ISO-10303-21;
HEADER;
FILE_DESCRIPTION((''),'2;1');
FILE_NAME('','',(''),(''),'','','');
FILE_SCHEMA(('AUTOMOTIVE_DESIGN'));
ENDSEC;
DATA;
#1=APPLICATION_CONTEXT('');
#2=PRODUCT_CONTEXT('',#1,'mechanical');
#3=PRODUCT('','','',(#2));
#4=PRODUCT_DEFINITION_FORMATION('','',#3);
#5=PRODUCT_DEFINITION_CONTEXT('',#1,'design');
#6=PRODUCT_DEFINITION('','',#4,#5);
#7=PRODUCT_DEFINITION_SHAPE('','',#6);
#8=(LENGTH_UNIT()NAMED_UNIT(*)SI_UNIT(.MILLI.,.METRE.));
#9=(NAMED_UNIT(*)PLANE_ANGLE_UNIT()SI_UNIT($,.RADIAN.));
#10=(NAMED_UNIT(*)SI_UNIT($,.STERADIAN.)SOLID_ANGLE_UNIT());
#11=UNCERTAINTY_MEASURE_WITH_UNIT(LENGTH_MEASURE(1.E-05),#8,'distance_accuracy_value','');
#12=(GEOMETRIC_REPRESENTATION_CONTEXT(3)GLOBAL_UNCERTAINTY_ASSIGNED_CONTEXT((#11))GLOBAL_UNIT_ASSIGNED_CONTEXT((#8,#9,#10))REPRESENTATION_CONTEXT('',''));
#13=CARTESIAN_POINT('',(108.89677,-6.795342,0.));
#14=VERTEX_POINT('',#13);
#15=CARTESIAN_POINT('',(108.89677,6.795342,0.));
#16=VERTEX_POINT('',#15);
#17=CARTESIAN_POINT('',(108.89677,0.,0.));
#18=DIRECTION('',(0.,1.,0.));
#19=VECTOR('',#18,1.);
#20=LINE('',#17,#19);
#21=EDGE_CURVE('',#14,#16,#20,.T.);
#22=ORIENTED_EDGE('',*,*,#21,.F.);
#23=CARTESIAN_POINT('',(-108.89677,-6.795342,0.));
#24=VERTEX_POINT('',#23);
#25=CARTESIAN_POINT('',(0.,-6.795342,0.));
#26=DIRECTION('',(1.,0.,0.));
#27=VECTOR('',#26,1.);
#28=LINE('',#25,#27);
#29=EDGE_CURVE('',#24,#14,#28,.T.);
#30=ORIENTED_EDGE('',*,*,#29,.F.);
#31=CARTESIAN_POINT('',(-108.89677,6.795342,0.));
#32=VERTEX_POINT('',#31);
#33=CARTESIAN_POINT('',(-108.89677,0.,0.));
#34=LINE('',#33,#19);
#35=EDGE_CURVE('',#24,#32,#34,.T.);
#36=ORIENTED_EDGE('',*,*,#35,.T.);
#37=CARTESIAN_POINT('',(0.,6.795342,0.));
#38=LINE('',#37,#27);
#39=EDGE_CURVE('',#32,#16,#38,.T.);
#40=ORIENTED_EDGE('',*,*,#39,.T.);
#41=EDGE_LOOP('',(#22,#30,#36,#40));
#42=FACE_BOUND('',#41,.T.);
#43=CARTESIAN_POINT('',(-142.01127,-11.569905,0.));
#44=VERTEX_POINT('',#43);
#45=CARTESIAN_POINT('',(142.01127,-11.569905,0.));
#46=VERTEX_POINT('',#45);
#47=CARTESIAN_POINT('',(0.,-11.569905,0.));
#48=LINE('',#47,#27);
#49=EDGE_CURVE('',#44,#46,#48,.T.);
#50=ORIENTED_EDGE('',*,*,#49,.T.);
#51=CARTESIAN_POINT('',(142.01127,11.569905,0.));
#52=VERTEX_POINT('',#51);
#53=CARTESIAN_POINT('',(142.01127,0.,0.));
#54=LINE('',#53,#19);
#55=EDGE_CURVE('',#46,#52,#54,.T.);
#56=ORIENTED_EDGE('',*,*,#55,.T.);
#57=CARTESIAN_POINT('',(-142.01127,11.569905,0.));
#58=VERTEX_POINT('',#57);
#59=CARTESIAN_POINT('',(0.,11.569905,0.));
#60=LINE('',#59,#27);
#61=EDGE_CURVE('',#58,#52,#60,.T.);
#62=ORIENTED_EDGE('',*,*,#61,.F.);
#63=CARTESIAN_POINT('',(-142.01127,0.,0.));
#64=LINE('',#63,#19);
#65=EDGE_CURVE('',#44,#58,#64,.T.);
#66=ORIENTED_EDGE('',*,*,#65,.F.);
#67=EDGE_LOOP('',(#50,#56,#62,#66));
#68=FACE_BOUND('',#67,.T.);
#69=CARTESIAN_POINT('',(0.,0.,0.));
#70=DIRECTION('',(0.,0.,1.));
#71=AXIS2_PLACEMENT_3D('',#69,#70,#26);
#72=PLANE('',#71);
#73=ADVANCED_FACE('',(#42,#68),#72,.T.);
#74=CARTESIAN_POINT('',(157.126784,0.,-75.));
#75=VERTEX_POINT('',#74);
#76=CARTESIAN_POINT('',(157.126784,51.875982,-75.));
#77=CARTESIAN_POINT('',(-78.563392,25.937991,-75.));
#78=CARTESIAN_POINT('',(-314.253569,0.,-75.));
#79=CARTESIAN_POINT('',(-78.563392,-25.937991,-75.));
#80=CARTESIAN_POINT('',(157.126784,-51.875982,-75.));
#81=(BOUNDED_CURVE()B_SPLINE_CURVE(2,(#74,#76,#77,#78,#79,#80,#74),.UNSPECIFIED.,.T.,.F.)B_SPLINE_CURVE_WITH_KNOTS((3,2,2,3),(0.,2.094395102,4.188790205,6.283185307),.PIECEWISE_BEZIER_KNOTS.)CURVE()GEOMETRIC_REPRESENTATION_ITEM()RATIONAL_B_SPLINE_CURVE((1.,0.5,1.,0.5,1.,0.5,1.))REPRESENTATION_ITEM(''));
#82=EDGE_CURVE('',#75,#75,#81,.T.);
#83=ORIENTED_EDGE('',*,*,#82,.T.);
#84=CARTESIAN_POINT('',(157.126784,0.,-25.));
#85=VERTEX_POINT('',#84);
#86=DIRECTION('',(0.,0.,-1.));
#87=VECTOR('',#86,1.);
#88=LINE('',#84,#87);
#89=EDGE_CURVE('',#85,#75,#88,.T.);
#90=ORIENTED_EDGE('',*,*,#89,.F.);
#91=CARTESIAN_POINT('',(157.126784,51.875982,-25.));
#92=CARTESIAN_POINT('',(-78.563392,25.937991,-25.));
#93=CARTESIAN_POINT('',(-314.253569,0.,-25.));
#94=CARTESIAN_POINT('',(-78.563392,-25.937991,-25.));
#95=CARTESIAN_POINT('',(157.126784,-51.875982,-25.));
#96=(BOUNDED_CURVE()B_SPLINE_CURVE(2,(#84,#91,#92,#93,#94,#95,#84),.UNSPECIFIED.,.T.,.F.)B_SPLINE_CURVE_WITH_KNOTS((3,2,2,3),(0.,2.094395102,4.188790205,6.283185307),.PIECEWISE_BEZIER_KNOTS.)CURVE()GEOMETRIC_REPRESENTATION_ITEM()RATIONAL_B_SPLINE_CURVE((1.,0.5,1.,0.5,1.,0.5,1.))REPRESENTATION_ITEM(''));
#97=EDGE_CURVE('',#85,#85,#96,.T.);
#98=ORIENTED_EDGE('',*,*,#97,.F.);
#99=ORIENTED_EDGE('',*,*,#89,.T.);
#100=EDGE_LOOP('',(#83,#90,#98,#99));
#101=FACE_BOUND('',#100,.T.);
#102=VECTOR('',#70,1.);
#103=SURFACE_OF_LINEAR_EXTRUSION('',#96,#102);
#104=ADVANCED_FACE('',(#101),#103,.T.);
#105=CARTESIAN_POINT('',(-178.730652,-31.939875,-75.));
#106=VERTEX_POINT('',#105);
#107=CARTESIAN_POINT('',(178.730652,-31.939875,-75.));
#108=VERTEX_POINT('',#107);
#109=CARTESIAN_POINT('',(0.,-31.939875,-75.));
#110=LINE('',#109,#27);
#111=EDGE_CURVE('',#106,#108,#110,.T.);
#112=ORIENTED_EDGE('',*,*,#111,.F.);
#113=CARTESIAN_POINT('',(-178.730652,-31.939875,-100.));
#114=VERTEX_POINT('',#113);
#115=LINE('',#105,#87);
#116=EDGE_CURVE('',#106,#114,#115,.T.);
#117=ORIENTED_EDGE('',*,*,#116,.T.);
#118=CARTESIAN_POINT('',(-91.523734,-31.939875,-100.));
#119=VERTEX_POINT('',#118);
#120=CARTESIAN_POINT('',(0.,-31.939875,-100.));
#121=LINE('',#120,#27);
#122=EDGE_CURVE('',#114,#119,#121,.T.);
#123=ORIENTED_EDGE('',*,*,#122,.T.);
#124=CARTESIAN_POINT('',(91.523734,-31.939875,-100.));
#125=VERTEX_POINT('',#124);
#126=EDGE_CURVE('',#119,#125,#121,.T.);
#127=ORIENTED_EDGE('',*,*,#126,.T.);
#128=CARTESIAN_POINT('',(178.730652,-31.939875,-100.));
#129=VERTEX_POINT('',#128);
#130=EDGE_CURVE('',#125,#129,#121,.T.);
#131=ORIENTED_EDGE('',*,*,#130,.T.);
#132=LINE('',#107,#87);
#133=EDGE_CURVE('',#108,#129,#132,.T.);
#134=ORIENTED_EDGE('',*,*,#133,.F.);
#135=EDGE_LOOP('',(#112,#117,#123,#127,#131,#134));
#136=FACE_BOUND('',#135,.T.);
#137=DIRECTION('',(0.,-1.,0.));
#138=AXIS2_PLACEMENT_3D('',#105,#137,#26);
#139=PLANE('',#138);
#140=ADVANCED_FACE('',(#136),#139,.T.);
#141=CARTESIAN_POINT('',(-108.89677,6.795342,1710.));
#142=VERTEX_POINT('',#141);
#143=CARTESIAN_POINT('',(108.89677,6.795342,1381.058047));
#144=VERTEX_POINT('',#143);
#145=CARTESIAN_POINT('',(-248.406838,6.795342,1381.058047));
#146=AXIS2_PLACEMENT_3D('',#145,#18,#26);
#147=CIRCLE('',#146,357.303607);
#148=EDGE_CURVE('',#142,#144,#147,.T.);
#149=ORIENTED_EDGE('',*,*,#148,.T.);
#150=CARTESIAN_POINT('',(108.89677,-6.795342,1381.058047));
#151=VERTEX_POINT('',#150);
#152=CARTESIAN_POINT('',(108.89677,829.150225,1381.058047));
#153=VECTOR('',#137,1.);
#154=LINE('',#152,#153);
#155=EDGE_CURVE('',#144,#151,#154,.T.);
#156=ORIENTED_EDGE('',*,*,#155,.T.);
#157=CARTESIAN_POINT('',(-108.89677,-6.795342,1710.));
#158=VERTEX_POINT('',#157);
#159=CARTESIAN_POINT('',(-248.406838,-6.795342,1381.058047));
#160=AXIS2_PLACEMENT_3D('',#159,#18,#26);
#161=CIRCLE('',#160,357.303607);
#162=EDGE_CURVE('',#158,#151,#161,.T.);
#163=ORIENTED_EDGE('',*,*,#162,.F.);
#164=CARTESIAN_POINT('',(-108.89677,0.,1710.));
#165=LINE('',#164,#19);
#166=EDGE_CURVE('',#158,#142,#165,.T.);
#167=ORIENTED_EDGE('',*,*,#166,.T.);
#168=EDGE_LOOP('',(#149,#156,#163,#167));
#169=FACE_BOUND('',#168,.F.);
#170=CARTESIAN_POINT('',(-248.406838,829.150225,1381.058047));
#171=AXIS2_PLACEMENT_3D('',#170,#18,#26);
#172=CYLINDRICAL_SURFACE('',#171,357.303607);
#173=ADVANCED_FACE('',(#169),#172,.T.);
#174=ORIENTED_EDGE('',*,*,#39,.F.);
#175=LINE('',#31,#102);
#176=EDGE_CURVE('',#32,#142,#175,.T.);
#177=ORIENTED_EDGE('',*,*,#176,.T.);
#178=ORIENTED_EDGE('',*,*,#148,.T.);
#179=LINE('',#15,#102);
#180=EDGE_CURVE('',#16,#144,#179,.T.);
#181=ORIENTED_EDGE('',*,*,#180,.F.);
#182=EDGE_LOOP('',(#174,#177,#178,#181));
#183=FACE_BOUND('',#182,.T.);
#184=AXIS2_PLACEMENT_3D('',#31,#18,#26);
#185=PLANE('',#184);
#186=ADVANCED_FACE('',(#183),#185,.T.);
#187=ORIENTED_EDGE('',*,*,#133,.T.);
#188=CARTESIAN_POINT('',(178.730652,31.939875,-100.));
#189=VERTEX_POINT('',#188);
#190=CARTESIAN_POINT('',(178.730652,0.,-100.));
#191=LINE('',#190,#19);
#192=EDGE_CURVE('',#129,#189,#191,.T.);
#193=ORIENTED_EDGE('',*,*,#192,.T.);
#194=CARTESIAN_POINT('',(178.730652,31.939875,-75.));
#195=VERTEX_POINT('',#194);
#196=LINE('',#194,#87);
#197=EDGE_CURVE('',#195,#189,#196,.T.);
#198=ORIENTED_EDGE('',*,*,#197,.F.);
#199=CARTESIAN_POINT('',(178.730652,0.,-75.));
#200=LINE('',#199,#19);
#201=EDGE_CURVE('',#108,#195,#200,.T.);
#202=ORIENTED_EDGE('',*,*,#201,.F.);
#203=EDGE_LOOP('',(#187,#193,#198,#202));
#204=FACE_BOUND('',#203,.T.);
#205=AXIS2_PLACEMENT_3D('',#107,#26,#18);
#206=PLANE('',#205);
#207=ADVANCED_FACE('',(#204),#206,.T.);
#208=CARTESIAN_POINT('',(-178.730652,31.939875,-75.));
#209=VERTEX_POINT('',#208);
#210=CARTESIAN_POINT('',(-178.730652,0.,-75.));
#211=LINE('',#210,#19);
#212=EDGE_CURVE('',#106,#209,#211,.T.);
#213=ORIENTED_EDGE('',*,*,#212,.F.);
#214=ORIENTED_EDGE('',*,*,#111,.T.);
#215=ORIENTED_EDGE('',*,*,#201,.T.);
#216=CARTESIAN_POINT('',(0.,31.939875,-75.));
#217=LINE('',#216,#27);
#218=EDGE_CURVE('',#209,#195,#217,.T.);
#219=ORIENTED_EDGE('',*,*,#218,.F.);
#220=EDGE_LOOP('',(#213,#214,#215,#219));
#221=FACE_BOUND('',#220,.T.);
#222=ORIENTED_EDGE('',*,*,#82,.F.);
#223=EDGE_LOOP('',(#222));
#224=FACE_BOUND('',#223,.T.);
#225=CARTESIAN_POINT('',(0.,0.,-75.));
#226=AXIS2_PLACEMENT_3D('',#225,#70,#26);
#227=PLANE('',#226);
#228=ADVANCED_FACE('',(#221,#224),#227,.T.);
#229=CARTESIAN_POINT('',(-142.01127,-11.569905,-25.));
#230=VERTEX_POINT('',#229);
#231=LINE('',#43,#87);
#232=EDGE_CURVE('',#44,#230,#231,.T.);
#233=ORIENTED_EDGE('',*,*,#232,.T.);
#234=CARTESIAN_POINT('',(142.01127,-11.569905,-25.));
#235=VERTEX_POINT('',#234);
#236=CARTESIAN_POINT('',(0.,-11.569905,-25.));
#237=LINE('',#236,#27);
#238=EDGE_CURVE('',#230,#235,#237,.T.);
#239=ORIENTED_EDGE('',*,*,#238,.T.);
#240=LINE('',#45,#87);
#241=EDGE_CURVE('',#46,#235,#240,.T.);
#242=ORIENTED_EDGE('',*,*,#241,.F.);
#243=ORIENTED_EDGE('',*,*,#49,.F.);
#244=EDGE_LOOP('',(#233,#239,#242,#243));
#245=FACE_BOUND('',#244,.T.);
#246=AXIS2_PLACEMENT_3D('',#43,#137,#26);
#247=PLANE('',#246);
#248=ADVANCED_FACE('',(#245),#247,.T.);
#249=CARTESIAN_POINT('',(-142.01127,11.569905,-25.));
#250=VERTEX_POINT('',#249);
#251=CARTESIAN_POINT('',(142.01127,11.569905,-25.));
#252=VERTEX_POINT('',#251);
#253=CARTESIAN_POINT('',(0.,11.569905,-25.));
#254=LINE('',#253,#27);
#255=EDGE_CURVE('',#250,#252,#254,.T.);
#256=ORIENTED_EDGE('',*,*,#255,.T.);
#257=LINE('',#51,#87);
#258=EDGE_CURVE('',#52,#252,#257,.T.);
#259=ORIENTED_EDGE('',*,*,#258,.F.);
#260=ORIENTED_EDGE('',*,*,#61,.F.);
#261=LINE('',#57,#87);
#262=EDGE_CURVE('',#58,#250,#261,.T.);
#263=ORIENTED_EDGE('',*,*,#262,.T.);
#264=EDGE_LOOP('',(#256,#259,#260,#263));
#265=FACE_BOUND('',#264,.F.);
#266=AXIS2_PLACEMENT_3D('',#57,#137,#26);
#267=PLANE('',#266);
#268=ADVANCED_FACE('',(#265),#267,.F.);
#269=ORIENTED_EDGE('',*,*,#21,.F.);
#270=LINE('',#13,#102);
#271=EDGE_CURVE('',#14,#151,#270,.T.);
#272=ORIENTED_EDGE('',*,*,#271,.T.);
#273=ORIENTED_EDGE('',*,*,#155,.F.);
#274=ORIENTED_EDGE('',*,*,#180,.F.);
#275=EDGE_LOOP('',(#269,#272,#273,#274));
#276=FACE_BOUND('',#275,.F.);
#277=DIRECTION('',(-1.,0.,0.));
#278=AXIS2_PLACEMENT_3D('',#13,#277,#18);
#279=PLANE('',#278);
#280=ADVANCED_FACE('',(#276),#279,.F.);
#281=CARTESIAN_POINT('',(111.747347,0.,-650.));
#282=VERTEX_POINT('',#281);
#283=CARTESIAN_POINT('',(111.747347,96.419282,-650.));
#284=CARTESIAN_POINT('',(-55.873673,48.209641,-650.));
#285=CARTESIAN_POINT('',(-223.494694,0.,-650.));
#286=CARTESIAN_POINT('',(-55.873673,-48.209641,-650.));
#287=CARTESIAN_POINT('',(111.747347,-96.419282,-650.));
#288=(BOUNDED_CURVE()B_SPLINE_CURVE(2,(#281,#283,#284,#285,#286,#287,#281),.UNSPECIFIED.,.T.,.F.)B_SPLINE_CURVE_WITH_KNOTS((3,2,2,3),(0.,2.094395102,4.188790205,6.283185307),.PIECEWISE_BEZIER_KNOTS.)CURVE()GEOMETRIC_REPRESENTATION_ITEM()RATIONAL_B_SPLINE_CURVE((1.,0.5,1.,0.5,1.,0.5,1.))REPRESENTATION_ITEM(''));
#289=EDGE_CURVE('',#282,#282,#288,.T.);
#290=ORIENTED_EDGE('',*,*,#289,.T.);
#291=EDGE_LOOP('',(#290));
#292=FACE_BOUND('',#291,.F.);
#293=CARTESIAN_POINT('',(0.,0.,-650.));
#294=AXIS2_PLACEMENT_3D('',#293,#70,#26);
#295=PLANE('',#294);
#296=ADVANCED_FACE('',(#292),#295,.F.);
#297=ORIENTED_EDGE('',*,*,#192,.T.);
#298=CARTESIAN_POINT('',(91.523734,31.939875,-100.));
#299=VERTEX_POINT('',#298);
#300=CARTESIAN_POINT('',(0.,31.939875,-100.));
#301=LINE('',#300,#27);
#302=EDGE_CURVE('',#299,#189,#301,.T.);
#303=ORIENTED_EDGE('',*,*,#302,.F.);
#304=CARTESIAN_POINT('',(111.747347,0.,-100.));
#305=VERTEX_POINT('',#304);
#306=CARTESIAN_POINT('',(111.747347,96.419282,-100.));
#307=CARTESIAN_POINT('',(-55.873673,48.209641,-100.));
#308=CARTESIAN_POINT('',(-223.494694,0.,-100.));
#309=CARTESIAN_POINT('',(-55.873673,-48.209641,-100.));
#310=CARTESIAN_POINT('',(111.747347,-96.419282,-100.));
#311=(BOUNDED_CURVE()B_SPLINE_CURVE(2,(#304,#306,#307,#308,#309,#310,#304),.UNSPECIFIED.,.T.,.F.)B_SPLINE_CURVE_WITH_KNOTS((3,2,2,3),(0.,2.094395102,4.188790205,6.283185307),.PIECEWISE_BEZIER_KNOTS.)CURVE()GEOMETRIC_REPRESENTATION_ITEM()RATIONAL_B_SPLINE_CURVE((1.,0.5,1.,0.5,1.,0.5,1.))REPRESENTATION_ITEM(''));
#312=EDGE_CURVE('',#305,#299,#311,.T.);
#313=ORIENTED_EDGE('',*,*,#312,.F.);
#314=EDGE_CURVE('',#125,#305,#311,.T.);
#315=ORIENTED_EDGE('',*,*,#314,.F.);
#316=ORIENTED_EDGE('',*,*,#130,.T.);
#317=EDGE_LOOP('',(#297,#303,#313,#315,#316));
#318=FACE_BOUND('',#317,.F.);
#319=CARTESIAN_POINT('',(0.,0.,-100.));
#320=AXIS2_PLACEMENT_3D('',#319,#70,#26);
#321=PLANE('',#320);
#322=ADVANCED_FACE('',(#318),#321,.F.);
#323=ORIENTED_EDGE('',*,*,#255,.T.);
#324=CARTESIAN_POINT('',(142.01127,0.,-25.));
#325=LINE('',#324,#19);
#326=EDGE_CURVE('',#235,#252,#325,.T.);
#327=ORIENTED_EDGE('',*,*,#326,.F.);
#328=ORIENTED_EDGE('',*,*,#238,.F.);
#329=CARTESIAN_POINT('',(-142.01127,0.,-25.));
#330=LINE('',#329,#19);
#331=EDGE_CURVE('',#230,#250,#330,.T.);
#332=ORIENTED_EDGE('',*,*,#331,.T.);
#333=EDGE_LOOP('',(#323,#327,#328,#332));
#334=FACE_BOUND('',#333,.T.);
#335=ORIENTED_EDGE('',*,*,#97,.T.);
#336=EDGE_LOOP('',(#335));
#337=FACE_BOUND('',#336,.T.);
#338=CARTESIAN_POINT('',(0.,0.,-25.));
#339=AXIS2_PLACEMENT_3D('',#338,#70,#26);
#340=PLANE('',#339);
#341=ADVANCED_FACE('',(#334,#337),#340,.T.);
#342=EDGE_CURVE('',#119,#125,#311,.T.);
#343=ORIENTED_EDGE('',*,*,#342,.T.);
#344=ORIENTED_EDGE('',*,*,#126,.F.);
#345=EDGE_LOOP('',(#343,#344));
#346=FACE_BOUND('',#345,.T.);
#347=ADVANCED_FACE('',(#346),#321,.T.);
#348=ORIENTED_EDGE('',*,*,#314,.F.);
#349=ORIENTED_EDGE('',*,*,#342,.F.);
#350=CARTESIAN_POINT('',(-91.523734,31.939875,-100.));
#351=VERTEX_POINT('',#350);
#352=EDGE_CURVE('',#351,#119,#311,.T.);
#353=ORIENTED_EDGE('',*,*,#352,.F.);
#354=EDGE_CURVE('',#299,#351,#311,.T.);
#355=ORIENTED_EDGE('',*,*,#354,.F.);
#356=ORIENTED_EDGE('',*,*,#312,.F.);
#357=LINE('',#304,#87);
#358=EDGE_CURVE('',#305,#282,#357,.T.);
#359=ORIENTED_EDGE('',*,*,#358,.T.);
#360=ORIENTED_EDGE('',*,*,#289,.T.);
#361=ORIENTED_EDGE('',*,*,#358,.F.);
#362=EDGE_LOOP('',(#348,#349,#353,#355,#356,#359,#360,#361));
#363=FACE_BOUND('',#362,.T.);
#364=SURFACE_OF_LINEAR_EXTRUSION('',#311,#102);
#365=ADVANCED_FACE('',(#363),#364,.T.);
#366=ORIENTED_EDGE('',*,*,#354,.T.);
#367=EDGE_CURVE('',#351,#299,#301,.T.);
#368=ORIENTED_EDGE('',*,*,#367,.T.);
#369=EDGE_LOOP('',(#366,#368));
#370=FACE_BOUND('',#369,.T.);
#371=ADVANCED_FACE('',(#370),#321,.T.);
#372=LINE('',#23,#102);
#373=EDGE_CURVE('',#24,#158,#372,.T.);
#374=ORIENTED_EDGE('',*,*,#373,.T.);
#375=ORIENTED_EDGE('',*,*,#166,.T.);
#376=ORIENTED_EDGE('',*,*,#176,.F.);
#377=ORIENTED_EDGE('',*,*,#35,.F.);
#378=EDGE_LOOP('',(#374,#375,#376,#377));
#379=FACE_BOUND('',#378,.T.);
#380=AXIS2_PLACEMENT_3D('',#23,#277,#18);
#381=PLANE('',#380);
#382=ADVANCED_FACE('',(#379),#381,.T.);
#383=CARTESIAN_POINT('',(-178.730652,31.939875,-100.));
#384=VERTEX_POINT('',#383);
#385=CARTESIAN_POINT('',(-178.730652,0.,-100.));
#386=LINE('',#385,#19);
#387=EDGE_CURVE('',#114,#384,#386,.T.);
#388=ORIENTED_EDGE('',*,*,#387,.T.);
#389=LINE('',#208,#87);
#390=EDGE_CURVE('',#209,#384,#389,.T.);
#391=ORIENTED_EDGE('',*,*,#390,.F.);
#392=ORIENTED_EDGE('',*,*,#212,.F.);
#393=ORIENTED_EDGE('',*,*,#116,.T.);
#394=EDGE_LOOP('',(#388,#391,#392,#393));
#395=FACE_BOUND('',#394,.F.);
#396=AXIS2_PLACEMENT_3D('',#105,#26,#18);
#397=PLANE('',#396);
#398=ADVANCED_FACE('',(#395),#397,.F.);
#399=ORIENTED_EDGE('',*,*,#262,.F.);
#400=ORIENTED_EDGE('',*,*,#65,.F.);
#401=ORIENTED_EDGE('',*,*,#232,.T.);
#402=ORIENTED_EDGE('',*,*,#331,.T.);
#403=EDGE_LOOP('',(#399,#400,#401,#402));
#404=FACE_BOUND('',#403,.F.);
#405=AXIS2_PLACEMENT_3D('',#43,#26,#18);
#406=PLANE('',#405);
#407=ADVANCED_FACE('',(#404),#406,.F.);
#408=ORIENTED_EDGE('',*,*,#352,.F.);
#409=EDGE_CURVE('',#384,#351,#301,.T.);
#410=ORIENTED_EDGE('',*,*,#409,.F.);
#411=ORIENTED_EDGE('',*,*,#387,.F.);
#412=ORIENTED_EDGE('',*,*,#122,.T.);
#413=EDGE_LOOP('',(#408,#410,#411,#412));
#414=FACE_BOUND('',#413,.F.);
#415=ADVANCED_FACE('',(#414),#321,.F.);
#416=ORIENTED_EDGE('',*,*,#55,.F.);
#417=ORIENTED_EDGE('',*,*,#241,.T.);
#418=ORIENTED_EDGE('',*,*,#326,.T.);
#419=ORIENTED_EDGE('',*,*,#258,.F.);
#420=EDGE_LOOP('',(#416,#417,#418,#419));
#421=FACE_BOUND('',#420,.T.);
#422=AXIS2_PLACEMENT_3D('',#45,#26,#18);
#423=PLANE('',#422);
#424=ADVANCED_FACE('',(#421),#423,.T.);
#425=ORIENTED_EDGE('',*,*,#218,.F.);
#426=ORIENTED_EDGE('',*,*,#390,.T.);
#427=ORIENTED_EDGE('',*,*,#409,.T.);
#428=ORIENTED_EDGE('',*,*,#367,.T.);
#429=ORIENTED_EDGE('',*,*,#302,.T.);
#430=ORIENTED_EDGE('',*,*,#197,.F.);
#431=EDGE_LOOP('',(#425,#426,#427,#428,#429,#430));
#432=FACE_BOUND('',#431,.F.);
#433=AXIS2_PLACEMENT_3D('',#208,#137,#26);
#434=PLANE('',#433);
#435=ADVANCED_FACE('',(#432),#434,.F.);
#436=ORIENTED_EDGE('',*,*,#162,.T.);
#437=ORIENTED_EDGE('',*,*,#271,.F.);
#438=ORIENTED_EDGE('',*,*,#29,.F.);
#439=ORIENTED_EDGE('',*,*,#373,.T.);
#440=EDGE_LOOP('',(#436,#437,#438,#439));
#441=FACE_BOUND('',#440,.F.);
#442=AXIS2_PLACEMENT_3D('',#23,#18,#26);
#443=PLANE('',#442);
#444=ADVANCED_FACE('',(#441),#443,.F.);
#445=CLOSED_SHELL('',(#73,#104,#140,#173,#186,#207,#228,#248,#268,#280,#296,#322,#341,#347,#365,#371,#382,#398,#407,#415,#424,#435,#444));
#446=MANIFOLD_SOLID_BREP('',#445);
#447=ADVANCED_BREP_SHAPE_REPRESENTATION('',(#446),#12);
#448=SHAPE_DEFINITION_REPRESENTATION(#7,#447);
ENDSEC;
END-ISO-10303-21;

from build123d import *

# Parameters (mm, degrees)
F0_W        = 217.7935391665
F0_H        = 13.5906832293
F1_DEPTH    = 1710
F2_T1_DEPTH = 1658.3004497915
F3_W        = 284.022539854
F3_H        = 23.1398101896
F4_DEPTH    = 25
F7_DEPTH    = 50
F9_W        = 357.4613034725
F9_H        = 63.879750669
F10_DEPTH   = 25
F13_DEPTH   = 550


# Not quite as in the source:
# - a fillet or chamfer that OpenCascade refuses, or shapes differently, is made with other operations: its cross-section is extruded or revolved along the edge and cut away or added


with BuildPart() as f1:
    # F0 (on Top) → F1 (new body)
    with BuildSketch(Plane.XY):
        Rectangle(F0_W, F0_H)
    extrude(amount=F1_DEPTH)

    # F2: fillet of radius 357.3036072312 on 1 edges, made by hand

    # F2_s2 → F2_t1 (cut)
    with BuildSketch(Plane.XZ.offset(-829.1502248957)):
        with BuildLine():
            ThreePointArc((108.8967695832, 1381.0580466876), (49.513720811, 1578.3122192364), (-108.8967695832, 1710))
            Line((-108.8967695832, 1710), (108.8967695832, 1710))
            Line((108.8967695832, 1710), (108.8967695832, 1381.0580466876))
        make_face()
    extrude(amount=F2_T1_DEPTH, mode=Mode.SUBTRACT)

    # F3 (on Top) → F4 (join)
    with BuildSketch(Plane.XY):
        Rectangle(F3_W, F3_H)
    extrude(amount=-F4_DEPTH)

    # F6 (on offset) → F7 (join)
    with BuildSketch(Plane.XY.offset(-25)):
        with BuildLine():
            add(Edge.make_bspline(
                [(157.1267843246, 0), (157.1267843246, 51.8759819398), (-78.5633921623, 25.9379909699), (-314.2535686493, 0), (-78.5633921623, -25.9379909699), (157.1267843246, -51.8759819398), (157.1267843246, 0)],
                knots=[0, 0, 0, 2.0943951024, 2.0943951024, 4.1887902048, 4.1887902048, 6.2831853072, 6.2831853072, 6.2831853072], degree=2, weights=[1, 0.5, 1, 0.5, 1, 0.5, 1]))
        make_face()
    extrude(amount=-F7_DEPTH)

    # F9 (on offset) → F10 (join)
    with BuildSketch(Plane.XY.offset(-75)):
        Rectangle(F9_W, F9_H)
    extrude(amount=-F10_DEPTH)

    # F12 (on offset) → F13 (join)
    with BuildSketch(Plane.XY.offset(-100)):
        with BuildLine():
            add(Edge.make_bspline(
                [(111.7473468184, 0), (111.7473468184, 96.4192818942), (-55.8736734092, 48.2096409471), (-223.4946936369, 0), (-55.8736734092, -48.2096409471), (111.7473468184, -96.4192818942), (111.7473468184, 0)],
                knots=[0, 0, 0, 2.0943951024, 2.0943951024, 4.1887902048, 4.1887902048, 6.2831853072, 6.2831853072, 6.2831853072], degree=2, weights=[1, 0.5, 1, 0.5, 1, 0.5, 1]))
        make_face()
    extrude(amount=-F13_DEPTH)


solid = f1.part
